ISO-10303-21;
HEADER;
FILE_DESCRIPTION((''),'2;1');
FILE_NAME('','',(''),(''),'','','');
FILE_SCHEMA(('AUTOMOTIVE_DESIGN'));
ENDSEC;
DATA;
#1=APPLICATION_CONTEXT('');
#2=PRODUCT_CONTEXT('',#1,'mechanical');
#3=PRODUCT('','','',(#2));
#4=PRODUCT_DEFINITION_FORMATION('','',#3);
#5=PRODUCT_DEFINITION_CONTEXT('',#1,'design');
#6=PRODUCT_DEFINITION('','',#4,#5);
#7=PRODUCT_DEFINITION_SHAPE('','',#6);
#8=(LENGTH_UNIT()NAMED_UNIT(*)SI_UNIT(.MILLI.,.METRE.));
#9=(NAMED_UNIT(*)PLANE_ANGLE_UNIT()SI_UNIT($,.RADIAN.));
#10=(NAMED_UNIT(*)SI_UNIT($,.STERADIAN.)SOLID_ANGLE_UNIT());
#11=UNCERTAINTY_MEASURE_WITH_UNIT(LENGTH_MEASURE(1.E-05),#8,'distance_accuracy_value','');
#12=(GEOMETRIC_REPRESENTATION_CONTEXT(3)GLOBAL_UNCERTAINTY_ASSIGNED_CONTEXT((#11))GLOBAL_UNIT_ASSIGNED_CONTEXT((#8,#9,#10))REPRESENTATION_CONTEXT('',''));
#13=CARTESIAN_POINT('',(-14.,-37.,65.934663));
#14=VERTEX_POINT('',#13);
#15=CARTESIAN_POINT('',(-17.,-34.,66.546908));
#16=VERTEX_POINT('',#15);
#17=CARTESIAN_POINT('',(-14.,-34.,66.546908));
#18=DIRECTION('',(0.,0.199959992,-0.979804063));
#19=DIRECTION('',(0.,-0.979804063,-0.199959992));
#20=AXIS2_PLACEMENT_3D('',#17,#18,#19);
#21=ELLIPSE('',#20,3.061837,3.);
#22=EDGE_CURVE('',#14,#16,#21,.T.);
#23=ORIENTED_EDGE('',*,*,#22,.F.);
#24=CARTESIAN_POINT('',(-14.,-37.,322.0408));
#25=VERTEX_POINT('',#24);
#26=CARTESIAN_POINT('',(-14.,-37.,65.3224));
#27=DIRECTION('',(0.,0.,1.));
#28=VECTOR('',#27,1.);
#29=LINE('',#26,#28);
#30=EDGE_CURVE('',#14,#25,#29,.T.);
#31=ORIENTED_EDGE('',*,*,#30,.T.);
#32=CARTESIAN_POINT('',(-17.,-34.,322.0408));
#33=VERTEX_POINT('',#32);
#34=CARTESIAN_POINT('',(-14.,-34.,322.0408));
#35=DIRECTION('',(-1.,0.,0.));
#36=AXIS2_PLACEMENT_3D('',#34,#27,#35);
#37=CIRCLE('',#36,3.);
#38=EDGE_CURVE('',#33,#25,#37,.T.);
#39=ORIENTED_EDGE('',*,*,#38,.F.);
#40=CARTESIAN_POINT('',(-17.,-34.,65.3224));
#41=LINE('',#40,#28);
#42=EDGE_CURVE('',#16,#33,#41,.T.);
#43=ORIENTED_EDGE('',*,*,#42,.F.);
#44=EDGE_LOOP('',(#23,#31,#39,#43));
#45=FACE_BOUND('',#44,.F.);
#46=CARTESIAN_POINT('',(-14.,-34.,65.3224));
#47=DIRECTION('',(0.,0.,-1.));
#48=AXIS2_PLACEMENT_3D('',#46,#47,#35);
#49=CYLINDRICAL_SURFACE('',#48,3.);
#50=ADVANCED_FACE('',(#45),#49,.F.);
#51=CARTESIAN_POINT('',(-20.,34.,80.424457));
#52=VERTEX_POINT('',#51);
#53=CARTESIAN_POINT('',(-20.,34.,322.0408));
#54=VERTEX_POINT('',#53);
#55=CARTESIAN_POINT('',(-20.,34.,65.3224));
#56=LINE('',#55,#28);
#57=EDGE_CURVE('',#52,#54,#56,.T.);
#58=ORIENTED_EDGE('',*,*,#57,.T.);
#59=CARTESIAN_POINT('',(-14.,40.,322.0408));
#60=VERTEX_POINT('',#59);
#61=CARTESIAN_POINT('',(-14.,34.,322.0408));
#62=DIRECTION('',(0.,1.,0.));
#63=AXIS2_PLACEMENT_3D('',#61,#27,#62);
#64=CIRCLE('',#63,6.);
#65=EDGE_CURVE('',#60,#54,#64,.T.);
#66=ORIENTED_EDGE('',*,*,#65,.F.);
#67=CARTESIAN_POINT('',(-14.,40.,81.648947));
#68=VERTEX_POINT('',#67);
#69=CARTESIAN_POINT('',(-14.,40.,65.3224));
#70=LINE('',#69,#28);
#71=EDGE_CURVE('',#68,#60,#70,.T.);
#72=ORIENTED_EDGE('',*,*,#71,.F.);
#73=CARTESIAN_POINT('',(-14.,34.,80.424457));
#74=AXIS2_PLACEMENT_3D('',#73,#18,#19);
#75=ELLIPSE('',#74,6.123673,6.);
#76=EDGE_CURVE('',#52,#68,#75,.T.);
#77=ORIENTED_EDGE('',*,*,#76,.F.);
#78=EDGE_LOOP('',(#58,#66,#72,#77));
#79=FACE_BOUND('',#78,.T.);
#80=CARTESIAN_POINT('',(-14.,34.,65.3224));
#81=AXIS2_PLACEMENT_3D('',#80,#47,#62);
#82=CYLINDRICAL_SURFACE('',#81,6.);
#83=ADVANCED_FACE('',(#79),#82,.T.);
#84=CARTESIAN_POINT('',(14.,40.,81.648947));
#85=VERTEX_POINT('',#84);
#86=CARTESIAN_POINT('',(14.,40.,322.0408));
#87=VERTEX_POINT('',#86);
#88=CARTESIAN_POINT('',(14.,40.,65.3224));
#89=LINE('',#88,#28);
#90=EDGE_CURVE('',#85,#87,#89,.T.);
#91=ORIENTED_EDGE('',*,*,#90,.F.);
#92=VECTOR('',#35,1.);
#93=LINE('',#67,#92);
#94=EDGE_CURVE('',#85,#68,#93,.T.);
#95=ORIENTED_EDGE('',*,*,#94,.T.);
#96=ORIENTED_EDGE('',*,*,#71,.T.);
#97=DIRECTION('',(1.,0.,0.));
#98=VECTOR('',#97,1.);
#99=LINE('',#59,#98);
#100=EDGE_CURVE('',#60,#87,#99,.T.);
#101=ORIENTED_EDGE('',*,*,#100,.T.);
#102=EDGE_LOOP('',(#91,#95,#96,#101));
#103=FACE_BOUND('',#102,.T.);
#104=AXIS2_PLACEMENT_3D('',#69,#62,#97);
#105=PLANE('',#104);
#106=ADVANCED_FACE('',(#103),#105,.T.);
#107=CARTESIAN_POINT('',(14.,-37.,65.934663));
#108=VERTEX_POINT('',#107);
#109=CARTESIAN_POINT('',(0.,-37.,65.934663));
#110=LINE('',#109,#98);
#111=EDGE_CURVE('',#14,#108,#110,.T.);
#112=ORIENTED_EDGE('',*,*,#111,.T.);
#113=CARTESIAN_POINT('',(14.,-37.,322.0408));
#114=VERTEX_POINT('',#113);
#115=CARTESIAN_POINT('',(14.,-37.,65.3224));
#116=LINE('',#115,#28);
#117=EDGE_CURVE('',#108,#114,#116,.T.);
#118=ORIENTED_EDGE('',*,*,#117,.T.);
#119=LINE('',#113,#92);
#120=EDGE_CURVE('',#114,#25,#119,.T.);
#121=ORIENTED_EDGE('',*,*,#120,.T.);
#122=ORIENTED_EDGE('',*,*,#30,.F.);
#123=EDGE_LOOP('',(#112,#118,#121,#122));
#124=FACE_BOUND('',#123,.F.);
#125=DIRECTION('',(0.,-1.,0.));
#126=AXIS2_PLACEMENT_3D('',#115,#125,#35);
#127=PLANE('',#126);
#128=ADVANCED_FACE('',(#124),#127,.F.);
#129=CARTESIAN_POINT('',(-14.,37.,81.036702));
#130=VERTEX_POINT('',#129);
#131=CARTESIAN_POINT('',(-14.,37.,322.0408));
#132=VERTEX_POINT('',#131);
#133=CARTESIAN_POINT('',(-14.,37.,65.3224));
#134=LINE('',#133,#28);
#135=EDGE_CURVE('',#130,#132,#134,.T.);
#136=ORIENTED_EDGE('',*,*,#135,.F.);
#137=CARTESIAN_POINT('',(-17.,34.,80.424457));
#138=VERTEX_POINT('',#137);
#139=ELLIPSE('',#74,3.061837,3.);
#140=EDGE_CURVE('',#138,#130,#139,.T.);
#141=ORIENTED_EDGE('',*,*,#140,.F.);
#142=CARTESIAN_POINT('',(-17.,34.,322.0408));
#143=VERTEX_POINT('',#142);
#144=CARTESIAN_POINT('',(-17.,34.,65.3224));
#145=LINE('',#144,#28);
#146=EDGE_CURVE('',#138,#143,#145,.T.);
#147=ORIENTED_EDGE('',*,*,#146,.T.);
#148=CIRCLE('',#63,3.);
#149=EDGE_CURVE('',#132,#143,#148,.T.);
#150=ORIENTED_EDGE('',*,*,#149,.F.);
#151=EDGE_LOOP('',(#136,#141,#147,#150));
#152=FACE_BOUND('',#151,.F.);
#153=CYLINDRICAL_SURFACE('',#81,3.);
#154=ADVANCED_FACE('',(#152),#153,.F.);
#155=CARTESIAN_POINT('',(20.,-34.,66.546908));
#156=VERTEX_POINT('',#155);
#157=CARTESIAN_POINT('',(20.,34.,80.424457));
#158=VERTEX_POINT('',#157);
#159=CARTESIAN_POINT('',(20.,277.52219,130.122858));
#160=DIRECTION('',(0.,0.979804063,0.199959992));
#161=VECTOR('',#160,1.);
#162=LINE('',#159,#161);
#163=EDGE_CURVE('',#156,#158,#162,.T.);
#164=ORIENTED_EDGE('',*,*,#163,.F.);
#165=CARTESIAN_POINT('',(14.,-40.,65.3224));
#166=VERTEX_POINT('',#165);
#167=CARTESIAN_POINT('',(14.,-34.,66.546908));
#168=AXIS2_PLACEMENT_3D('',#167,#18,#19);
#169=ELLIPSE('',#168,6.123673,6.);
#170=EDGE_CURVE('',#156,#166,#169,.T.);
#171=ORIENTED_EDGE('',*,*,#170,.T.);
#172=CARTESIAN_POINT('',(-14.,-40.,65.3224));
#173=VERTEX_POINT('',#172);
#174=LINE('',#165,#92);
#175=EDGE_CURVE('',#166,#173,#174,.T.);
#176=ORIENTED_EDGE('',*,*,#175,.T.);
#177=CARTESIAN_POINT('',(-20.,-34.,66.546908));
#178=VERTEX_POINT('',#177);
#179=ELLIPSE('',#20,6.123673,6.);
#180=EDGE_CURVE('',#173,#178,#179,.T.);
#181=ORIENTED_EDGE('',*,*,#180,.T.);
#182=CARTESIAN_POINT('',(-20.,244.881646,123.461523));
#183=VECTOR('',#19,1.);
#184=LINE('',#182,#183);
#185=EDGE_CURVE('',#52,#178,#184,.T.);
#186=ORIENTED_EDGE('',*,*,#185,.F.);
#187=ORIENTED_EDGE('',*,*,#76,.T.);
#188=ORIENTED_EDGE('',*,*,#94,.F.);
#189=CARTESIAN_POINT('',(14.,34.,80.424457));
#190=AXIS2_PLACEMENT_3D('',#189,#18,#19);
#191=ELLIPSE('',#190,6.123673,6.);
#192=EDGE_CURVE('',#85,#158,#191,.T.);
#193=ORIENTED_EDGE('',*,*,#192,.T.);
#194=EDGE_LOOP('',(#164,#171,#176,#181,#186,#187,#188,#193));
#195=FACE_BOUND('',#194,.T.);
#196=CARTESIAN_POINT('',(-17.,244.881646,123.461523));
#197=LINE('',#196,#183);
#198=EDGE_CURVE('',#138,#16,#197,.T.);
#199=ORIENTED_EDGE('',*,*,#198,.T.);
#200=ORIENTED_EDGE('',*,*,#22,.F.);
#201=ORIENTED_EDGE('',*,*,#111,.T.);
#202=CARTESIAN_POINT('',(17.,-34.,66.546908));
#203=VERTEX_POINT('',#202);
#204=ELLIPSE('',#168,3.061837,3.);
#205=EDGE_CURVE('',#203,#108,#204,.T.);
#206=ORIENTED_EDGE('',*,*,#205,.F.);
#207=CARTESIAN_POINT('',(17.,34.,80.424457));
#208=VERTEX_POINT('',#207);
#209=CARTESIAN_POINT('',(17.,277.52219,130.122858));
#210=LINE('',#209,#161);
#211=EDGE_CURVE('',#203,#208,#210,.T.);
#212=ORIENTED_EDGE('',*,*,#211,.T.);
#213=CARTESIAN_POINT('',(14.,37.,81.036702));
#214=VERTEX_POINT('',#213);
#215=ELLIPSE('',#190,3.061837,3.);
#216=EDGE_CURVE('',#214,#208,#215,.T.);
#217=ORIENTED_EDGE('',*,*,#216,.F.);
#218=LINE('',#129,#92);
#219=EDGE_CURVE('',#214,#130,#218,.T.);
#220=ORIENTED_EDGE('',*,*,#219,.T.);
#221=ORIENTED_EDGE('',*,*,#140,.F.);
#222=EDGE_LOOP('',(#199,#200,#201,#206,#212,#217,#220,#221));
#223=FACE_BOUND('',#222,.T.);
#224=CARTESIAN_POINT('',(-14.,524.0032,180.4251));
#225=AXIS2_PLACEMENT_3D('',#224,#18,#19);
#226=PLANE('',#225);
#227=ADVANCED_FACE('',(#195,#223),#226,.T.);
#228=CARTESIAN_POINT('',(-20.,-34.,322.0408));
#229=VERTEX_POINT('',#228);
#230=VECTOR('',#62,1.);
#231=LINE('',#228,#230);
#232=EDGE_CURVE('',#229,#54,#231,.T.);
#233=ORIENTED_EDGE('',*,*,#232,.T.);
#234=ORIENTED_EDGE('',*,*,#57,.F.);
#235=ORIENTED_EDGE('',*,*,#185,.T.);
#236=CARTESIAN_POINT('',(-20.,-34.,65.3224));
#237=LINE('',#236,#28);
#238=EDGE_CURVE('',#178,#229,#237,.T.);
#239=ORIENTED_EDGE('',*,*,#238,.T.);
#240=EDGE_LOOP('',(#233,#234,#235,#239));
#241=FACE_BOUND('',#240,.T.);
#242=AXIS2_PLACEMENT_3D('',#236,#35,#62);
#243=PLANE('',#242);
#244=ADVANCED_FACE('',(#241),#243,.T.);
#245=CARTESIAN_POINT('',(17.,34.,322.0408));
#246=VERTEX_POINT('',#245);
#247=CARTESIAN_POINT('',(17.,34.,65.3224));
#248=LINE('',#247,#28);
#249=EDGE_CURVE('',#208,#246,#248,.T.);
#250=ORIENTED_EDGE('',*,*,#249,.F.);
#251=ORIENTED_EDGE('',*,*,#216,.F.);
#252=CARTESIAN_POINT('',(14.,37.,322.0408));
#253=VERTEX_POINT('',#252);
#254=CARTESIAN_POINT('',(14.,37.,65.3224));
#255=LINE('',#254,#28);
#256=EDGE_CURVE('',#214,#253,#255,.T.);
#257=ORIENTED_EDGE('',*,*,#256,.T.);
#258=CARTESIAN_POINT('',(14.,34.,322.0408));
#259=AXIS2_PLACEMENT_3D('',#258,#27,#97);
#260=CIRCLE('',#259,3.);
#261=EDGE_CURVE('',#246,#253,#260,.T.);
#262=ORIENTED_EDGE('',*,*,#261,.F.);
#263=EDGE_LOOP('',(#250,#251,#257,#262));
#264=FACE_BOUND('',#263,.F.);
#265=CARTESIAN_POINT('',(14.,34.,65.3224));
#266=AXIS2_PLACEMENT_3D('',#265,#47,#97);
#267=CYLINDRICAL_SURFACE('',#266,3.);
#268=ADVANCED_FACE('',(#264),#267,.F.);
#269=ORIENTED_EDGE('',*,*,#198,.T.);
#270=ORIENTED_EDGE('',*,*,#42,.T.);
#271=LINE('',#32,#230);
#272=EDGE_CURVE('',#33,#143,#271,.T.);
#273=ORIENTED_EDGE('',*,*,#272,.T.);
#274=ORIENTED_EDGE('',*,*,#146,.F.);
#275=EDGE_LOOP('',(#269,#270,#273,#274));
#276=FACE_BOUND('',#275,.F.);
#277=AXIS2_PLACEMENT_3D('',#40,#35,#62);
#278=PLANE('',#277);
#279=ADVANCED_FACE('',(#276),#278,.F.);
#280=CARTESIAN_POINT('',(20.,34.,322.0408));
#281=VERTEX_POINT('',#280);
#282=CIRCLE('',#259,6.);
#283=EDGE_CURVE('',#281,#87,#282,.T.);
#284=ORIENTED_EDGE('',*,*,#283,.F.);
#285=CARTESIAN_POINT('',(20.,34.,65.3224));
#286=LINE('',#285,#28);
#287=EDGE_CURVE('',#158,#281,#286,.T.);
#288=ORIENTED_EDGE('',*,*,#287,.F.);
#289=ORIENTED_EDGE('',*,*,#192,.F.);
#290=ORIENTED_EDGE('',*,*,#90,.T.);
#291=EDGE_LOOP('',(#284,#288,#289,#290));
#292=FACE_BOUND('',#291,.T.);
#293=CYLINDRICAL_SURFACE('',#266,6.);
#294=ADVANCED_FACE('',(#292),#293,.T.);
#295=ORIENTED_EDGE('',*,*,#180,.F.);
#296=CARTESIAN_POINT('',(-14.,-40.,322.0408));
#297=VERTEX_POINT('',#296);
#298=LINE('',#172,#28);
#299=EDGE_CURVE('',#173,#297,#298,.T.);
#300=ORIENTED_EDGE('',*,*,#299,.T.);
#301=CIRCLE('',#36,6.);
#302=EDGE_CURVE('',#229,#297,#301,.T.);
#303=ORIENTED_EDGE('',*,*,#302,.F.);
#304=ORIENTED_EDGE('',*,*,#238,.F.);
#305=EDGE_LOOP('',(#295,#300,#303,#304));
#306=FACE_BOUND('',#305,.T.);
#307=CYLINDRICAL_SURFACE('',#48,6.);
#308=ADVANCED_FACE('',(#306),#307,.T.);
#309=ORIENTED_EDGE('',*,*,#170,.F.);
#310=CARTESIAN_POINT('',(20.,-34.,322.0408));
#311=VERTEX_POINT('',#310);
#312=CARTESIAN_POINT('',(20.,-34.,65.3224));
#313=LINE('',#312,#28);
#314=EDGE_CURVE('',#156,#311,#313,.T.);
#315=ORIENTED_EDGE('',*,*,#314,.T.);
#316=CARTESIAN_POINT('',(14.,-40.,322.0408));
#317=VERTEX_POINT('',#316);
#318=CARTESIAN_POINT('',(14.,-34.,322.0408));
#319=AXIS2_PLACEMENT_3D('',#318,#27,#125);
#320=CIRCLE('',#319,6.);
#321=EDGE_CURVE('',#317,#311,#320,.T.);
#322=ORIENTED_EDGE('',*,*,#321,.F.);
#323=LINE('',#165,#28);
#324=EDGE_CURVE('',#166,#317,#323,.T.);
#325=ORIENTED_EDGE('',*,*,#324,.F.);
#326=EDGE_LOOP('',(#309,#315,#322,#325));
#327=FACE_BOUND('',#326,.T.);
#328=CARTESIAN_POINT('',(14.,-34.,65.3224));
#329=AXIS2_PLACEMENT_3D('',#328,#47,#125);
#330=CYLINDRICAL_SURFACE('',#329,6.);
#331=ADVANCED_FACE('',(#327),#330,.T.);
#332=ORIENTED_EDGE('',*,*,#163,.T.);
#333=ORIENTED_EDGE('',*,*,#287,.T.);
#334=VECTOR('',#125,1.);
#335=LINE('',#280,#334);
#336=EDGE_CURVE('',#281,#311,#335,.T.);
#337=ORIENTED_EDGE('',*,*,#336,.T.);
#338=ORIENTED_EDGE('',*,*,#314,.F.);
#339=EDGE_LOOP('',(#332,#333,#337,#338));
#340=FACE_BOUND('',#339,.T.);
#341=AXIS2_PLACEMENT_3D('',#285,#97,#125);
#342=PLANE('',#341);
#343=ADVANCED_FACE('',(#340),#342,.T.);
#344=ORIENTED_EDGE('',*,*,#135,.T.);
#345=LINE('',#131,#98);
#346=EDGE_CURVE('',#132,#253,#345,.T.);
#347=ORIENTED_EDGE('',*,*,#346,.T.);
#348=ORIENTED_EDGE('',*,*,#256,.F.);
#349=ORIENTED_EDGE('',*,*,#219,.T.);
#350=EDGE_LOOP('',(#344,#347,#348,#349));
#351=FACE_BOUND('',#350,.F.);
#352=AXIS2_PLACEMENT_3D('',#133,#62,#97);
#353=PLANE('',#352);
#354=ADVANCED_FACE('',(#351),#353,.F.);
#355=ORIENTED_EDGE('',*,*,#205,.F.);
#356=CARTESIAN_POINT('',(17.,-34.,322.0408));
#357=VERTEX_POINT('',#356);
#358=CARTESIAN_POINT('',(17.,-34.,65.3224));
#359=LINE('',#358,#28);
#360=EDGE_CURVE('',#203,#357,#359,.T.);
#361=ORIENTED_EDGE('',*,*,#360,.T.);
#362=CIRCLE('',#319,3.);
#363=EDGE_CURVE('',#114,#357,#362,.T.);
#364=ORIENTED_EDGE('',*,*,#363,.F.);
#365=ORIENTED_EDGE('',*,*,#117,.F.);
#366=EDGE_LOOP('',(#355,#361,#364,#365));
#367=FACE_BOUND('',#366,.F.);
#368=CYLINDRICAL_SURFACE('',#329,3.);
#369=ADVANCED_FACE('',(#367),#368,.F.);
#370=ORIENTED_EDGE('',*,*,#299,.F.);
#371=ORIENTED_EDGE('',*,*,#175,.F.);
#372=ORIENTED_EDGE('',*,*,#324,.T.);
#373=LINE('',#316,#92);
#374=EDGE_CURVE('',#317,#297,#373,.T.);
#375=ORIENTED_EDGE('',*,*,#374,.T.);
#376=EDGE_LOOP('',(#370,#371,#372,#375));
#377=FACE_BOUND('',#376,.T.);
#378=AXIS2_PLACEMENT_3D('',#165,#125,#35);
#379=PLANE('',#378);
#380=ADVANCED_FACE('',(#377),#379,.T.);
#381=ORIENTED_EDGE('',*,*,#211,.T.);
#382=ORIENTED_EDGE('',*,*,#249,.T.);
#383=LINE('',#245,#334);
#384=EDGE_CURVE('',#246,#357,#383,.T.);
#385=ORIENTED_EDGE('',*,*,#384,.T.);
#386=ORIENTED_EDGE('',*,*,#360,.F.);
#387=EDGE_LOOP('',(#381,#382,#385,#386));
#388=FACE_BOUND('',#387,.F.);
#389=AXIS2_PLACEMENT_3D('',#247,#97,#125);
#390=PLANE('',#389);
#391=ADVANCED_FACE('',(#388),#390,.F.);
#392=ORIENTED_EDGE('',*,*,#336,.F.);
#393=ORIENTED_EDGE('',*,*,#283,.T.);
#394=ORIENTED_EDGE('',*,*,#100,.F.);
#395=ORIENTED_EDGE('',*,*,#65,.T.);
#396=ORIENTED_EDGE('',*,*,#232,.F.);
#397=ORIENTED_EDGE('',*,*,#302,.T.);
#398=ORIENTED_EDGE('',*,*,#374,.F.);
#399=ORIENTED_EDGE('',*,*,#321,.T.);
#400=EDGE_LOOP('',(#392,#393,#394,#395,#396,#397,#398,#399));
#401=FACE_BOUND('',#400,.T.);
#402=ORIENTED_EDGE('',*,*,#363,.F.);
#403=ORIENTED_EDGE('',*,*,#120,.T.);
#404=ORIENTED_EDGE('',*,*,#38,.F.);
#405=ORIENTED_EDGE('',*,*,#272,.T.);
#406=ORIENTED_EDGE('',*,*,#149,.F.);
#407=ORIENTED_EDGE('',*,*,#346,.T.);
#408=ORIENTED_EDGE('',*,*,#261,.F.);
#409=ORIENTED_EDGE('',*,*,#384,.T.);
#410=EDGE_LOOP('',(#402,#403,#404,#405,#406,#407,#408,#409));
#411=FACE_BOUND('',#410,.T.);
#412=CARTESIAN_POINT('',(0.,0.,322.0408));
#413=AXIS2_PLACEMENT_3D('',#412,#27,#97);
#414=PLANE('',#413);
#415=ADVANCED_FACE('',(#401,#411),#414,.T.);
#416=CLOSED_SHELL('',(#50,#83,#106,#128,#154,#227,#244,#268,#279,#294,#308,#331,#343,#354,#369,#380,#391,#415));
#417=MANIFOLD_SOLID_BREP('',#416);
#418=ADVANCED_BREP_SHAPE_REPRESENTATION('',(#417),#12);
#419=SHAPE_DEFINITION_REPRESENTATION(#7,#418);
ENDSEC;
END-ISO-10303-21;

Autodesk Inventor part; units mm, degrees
ref_plane "Start Plane" through (0, 0, 65.3224) normal (0, 0, 1) x (1, 0, 0)
ref_plane "End Plane" through (0, 0, 322.0408) normal (0, 0, 1) x (1, 0, 0)
sketch "Sketch" plane through (0, 0, 0) normal (0, 0, 1) x (1, 0, 0)
  line L0 (-20, -34) -> (-20, 34)
  line L1 (-14, 40) -> (14, 40)
  line L2 (20, 34) -> (20, -34)
  line L3 (14, -40) -> (-14, -40)
  arc A0 (-20, -34) -> (-14, -40) centre (-14, -34) ccw
  arc A1 (20, 34) -> (14, 40) centre (14, 34) ccw
  arc A2 (-14, 40) -> (-20, 34) centre (-14, 34) ccw
  arc A3 (14, -40) -> (20, -34) centre (14, -34) ccw
  arc A4 (-14, 37) -> (-17, 34) centre (-14, 34) ccw
  line L4 (-14, 37) -> (14, 37)
  arc A5 (17, 34) -> (14, 37) centre (14, 34) ccw
  line L5 (17, 34) -> (17, -34)
  arc A6 (14, -37) -> (17, -34) centre (14, -34) ccw
  line L6 (14, -37) -> (-14, -37)
  arc A7 (-17, -34) -> (-14, -37) centre (-14, -34) ccw
  line L7 (-17, -34) -> (-17, 34)
  line L8 (0, 57.7397) -> (0, -57.7397) construction
  line L9 (-29.7397, 0) -> (29.7397, 0) construction
  dimension "d7" = 6
  dimension "d9" = 40
  dimension "d11" = 80
  dimension "d12" = 3
  dimension "d15" = 20
  dimension "d16" = 40
extrude "Body" add sketch "Sketch" along normal up to surface (256.7184 mm away) from surface at 65.3224
sketch "Sketch3" plane through (0, 0, 0) normal (0, 0, 1) x (1, 0, 0)
  line L0 (0, 0) -> (10, 0)
ref_plane "Work Plane3" through (0, 0, 0) normal (0, -1, 0) x (1, 0, 0)
ref_plane "Work Plane4" through (-14, 524.0032, 180.4251) normal (0, 0.19996, -0.9798041) x (1, 0, 0)
split "Split1" plane through (-14, 524.0032, 180.4251) removes the side toward (0, 0.19996, -0.9798041)
sketch "Sketch4" plane through (0, 0, 0) normal (0, -1, 0) x (1, 0, 0)
  line L0 (-2, 65.3224) -> (12, 65.3224) projected
  line L1 (-2, 322.0408) -> (12, 322.0408) projected
  dimension "d18" = 256.7184
equation "\"d7\" = G_IR"
equation "\"d9\" = G_W"
equation "\"d11\" = G_H"
equation "\"d12\" = G_T"
equation "\"d15\" = 0.5 * d9"
equation "\"d16\" = 0.5 * d11"
equation "\"d3\" = G_L"
equation "\"G_W\" = 40"
equation "\"G_H\" = 80"
equation "\"G_T\" = 3"
equation "\"G_IR\" = 6"
equation "\"G_L\" = d18"
equation "\"G_OFFSET_START\" = -65.32245"
equation "\"d13\" = -G_OFFSET_START"
equation "\"d14\" = G_OFFSET_END + B_L"
equation "\"B_L\" = 402.04082"
equation "\"G_OFFSET_END\" = -80"
properties part number "ISO 10799-2 - 80x40x3 - 256,72" material "Steel, Mild"
